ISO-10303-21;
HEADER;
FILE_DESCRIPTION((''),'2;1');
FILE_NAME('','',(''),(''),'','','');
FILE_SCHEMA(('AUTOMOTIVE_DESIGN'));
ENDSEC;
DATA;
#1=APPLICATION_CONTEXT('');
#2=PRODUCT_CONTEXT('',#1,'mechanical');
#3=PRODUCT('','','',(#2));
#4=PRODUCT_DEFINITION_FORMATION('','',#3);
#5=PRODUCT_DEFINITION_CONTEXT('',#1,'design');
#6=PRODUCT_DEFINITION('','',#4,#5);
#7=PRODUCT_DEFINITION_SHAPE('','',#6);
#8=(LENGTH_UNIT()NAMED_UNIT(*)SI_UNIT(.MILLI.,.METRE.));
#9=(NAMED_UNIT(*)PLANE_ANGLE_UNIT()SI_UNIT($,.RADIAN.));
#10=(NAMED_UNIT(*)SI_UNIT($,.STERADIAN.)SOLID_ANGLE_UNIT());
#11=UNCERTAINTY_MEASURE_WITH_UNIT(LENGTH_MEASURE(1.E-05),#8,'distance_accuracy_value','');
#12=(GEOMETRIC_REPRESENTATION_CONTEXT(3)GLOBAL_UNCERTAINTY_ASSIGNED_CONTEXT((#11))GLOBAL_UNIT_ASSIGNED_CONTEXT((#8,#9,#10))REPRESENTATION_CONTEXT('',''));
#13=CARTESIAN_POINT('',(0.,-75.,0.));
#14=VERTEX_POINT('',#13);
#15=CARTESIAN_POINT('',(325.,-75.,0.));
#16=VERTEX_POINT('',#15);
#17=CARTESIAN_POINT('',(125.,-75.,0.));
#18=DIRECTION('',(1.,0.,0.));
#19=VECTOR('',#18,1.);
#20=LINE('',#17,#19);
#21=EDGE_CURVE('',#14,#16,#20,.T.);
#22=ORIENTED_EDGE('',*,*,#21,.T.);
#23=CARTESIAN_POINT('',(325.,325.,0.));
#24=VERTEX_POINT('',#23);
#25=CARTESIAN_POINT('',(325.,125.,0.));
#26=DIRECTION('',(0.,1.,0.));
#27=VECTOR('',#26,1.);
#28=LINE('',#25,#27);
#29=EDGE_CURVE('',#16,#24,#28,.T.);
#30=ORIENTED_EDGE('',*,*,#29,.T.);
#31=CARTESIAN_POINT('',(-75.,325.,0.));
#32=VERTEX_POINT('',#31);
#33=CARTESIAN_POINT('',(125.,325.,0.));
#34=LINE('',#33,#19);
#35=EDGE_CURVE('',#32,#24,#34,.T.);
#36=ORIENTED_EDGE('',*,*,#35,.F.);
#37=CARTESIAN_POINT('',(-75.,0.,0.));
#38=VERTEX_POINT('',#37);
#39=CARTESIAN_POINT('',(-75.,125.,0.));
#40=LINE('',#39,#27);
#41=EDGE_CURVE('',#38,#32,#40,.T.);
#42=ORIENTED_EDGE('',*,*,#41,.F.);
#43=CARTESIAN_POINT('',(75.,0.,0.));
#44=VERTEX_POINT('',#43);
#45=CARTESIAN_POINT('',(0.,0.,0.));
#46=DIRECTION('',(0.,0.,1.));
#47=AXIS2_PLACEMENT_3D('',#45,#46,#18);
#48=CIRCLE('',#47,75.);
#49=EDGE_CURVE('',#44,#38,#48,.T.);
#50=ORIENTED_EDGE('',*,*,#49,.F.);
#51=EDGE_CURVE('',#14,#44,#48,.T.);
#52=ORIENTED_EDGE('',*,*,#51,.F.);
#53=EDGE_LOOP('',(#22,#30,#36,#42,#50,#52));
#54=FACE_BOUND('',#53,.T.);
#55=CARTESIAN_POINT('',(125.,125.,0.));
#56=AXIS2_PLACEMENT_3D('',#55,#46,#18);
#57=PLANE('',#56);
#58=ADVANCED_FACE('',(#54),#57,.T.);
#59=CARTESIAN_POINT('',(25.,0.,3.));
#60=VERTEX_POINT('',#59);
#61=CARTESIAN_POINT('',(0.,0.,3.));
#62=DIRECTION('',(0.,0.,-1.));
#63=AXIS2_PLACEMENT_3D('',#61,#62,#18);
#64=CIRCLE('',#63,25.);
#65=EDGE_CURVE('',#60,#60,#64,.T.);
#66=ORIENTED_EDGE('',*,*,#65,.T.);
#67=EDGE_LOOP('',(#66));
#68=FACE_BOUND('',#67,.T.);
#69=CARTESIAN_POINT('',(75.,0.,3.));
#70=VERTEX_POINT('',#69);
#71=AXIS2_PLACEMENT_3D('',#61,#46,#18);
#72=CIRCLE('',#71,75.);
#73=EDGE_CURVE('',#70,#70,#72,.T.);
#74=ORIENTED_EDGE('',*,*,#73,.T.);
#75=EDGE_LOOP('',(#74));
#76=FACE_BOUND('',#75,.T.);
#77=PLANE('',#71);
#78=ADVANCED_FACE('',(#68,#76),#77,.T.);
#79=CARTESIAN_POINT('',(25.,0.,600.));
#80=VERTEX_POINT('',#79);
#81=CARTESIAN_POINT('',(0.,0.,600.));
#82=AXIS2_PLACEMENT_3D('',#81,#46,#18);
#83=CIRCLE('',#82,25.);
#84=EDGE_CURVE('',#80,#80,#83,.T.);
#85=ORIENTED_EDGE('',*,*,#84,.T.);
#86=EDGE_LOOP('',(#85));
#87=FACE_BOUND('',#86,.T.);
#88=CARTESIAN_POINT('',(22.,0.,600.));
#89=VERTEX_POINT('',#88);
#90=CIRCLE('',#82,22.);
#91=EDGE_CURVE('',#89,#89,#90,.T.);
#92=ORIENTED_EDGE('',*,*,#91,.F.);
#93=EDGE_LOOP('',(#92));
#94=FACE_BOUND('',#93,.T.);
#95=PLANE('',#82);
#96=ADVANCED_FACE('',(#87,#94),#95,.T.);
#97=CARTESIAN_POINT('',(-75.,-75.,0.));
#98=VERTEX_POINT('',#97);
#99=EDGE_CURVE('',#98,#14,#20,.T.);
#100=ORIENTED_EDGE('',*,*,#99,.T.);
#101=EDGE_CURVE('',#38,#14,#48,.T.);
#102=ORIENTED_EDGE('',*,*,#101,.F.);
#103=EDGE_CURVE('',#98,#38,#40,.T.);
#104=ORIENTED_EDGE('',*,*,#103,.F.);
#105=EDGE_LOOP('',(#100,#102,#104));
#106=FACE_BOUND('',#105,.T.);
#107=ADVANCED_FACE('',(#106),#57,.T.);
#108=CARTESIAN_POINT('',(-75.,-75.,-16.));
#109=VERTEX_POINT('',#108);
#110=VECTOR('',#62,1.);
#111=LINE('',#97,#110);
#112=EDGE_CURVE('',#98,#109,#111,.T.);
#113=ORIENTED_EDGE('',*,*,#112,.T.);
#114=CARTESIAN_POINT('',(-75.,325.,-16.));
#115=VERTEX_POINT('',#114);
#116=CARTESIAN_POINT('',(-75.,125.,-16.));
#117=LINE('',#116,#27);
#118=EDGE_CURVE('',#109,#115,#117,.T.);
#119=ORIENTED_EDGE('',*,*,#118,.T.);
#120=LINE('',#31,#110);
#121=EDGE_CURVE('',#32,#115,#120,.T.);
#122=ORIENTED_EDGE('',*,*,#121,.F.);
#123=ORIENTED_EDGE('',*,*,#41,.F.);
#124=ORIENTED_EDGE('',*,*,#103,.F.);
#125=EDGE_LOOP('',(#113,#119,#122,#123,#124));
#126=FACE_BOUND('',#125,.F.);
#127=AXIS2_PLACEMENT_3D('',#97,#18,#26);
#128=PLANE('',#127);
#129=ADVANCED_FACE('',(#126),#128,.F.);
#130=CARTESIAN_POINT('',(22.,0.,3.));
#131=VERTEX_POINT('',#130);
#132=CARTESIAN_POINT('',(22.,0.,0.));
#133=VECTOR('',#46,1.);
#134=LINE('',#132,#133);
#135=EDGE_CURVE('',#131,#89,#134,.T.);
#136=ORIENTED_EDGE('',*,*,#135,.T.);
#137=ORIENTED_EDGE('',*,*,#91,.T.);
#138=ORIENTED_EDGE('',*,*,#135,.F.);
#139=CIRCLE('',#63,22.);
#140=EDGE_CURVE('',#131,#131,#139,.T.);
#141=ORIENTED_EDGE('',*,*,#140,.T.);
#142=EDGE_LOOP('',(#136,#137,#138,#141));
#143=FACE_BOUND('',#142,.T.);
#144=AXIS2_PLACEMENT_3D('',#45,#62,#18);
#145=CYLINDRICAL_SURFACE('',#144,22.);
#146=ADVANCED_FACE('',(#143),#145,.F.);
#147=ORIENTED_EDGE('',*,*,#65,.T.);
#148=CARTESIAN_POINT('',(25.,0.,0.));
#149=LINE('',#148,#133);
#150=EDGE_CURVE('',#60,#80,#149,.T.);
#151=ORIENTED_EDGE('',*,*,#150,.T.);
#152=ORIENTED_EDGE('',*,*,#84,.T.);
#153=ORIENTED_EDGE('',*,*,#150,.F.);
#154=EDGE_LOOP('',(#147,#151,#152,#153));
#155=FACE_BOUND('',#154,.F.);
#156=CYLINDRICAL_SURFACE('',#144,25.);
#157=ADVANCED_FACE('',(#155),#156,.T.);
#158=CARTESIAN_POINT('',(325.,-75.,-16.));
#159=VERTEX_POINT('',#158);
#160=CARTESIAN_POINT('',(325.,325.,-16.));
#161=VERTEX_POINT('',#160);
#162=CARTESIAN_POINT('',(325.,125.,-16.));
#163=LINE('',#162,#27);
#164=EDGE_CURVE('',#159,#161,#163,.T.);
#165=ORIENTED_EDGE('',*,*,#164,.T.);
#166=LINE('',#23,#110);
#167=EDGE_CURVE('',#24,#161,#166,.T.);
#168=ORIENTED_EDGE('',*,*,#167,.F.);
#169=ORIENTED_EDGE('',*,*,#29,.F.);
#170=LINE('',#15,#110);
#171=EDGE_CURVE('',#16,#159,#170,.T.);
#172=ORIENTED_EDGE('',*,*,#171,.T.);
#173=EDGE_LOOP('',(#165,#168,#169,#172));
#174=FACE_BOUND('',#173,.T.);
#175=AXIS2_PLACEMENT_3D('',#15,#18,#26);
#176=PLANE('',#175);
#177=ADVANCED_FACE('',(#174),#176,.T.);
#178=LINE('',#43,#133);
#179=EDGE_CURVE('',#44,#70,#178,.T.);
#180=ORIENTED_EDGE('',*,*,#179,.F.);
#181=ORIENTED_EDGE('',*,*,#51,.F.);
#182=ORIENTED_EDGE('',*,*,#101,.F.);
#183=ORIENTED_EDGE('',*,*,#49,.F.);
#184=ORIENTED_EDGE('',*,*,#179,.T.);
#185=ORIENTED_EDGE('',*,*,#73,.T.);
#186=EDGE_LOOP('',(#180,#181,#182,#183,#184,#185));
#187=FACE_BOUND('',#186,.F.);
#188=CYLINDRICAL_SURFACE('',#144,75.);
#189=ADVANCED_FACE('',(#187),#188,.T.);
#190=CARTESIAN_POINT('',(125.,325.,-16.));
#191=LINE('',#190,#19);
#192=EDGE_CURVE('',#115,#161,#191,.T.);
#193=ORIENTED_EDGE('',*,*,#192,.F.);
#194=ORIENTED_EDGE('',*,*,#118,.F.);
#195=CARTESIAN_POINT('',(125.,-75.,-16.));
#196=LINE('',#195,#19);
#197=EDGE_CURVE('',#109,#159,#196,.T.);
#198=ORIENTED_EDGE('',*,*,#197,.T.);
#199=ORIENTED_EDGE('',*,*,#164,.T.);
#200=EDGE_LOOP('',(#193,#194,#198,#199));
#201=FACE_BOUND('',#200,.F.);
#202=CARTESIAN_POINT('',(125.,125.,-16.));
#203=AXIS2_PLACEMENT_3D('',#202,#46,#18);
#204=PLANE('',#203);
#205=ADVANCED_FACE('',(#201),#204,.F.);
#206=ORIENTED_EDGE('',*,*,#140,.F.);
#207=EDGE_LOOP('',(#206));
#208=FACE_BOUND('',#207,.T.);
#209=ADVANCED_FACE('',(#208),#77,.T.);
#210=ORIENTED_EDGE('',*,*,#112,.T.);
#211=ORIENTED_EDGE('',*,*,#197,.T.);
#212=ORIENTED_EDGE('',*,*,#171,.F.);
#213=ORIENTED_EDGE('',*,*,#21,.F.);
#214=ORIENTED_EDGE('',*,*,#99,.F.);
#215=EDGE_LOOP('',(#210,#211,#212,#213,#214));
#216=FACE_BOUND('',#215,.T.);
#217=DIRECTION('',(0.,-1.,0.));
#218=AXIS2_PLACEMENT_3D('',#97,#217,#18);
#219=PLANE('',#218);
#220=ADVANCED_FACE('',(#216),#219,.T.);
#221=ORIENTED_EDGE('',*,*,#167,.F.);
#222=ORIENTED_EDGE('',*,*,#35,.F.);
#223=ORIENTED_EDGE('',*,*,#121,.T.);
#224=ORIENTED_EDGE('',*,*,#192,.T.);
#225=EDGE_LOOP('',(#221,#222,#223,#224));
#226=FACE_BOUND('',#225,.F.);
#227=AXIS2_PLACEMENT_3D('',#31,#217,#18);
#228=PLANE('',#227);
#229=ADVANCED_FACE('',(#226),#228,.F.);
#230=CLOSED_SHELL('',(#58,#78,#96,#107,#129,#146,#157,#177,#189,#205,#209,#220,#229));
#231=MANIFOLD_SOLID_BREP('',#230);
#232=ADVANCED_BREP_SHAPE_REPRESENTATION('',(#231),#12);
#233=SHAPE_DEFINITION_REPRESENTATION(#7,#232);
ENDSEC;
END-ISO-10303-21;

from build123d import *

# Parameters (mm, degrees)
F0_R     = 25
F1_DEPTH = 600
F2_T     = -3
F3_R     = 75
F4_DEPTH = 3
F5_W     = 400
F5_H     = 400
F6_DEPTH = 16


# Not quite as in the source:
# - a feature names something its author has since deleted; it is built from what else it names


with BuildPart() as f1:
    # F0 (on Top) → F1 (new body)
    with BuildSketch(Plane.XY):
        Circle(F0_R)
    extrude(amount=F1_DEPTH)

    # F2
    f2_openings = [f1.faces().sort_by_distance(p)[0] for p in [
        (0, 0, 600),
        (0, 0, 0),
    ]]
    offset(amount=F2_T, openings=f2_openings)

    # F3 (on Top) → F4 (join)
    with BuildSketch(Plane.XY):
        Circle(F3_R)
    extrude(amount=F4_DEPTH)

    # F5 (on Top) → F6 (join)
    with BuildSketch(Plane.XY):
        with Locations((125, 125)):
            Rectangle(F5_W, F5_H)
    extrude(amount=-F6_DEPTH)


solid = f1.part
